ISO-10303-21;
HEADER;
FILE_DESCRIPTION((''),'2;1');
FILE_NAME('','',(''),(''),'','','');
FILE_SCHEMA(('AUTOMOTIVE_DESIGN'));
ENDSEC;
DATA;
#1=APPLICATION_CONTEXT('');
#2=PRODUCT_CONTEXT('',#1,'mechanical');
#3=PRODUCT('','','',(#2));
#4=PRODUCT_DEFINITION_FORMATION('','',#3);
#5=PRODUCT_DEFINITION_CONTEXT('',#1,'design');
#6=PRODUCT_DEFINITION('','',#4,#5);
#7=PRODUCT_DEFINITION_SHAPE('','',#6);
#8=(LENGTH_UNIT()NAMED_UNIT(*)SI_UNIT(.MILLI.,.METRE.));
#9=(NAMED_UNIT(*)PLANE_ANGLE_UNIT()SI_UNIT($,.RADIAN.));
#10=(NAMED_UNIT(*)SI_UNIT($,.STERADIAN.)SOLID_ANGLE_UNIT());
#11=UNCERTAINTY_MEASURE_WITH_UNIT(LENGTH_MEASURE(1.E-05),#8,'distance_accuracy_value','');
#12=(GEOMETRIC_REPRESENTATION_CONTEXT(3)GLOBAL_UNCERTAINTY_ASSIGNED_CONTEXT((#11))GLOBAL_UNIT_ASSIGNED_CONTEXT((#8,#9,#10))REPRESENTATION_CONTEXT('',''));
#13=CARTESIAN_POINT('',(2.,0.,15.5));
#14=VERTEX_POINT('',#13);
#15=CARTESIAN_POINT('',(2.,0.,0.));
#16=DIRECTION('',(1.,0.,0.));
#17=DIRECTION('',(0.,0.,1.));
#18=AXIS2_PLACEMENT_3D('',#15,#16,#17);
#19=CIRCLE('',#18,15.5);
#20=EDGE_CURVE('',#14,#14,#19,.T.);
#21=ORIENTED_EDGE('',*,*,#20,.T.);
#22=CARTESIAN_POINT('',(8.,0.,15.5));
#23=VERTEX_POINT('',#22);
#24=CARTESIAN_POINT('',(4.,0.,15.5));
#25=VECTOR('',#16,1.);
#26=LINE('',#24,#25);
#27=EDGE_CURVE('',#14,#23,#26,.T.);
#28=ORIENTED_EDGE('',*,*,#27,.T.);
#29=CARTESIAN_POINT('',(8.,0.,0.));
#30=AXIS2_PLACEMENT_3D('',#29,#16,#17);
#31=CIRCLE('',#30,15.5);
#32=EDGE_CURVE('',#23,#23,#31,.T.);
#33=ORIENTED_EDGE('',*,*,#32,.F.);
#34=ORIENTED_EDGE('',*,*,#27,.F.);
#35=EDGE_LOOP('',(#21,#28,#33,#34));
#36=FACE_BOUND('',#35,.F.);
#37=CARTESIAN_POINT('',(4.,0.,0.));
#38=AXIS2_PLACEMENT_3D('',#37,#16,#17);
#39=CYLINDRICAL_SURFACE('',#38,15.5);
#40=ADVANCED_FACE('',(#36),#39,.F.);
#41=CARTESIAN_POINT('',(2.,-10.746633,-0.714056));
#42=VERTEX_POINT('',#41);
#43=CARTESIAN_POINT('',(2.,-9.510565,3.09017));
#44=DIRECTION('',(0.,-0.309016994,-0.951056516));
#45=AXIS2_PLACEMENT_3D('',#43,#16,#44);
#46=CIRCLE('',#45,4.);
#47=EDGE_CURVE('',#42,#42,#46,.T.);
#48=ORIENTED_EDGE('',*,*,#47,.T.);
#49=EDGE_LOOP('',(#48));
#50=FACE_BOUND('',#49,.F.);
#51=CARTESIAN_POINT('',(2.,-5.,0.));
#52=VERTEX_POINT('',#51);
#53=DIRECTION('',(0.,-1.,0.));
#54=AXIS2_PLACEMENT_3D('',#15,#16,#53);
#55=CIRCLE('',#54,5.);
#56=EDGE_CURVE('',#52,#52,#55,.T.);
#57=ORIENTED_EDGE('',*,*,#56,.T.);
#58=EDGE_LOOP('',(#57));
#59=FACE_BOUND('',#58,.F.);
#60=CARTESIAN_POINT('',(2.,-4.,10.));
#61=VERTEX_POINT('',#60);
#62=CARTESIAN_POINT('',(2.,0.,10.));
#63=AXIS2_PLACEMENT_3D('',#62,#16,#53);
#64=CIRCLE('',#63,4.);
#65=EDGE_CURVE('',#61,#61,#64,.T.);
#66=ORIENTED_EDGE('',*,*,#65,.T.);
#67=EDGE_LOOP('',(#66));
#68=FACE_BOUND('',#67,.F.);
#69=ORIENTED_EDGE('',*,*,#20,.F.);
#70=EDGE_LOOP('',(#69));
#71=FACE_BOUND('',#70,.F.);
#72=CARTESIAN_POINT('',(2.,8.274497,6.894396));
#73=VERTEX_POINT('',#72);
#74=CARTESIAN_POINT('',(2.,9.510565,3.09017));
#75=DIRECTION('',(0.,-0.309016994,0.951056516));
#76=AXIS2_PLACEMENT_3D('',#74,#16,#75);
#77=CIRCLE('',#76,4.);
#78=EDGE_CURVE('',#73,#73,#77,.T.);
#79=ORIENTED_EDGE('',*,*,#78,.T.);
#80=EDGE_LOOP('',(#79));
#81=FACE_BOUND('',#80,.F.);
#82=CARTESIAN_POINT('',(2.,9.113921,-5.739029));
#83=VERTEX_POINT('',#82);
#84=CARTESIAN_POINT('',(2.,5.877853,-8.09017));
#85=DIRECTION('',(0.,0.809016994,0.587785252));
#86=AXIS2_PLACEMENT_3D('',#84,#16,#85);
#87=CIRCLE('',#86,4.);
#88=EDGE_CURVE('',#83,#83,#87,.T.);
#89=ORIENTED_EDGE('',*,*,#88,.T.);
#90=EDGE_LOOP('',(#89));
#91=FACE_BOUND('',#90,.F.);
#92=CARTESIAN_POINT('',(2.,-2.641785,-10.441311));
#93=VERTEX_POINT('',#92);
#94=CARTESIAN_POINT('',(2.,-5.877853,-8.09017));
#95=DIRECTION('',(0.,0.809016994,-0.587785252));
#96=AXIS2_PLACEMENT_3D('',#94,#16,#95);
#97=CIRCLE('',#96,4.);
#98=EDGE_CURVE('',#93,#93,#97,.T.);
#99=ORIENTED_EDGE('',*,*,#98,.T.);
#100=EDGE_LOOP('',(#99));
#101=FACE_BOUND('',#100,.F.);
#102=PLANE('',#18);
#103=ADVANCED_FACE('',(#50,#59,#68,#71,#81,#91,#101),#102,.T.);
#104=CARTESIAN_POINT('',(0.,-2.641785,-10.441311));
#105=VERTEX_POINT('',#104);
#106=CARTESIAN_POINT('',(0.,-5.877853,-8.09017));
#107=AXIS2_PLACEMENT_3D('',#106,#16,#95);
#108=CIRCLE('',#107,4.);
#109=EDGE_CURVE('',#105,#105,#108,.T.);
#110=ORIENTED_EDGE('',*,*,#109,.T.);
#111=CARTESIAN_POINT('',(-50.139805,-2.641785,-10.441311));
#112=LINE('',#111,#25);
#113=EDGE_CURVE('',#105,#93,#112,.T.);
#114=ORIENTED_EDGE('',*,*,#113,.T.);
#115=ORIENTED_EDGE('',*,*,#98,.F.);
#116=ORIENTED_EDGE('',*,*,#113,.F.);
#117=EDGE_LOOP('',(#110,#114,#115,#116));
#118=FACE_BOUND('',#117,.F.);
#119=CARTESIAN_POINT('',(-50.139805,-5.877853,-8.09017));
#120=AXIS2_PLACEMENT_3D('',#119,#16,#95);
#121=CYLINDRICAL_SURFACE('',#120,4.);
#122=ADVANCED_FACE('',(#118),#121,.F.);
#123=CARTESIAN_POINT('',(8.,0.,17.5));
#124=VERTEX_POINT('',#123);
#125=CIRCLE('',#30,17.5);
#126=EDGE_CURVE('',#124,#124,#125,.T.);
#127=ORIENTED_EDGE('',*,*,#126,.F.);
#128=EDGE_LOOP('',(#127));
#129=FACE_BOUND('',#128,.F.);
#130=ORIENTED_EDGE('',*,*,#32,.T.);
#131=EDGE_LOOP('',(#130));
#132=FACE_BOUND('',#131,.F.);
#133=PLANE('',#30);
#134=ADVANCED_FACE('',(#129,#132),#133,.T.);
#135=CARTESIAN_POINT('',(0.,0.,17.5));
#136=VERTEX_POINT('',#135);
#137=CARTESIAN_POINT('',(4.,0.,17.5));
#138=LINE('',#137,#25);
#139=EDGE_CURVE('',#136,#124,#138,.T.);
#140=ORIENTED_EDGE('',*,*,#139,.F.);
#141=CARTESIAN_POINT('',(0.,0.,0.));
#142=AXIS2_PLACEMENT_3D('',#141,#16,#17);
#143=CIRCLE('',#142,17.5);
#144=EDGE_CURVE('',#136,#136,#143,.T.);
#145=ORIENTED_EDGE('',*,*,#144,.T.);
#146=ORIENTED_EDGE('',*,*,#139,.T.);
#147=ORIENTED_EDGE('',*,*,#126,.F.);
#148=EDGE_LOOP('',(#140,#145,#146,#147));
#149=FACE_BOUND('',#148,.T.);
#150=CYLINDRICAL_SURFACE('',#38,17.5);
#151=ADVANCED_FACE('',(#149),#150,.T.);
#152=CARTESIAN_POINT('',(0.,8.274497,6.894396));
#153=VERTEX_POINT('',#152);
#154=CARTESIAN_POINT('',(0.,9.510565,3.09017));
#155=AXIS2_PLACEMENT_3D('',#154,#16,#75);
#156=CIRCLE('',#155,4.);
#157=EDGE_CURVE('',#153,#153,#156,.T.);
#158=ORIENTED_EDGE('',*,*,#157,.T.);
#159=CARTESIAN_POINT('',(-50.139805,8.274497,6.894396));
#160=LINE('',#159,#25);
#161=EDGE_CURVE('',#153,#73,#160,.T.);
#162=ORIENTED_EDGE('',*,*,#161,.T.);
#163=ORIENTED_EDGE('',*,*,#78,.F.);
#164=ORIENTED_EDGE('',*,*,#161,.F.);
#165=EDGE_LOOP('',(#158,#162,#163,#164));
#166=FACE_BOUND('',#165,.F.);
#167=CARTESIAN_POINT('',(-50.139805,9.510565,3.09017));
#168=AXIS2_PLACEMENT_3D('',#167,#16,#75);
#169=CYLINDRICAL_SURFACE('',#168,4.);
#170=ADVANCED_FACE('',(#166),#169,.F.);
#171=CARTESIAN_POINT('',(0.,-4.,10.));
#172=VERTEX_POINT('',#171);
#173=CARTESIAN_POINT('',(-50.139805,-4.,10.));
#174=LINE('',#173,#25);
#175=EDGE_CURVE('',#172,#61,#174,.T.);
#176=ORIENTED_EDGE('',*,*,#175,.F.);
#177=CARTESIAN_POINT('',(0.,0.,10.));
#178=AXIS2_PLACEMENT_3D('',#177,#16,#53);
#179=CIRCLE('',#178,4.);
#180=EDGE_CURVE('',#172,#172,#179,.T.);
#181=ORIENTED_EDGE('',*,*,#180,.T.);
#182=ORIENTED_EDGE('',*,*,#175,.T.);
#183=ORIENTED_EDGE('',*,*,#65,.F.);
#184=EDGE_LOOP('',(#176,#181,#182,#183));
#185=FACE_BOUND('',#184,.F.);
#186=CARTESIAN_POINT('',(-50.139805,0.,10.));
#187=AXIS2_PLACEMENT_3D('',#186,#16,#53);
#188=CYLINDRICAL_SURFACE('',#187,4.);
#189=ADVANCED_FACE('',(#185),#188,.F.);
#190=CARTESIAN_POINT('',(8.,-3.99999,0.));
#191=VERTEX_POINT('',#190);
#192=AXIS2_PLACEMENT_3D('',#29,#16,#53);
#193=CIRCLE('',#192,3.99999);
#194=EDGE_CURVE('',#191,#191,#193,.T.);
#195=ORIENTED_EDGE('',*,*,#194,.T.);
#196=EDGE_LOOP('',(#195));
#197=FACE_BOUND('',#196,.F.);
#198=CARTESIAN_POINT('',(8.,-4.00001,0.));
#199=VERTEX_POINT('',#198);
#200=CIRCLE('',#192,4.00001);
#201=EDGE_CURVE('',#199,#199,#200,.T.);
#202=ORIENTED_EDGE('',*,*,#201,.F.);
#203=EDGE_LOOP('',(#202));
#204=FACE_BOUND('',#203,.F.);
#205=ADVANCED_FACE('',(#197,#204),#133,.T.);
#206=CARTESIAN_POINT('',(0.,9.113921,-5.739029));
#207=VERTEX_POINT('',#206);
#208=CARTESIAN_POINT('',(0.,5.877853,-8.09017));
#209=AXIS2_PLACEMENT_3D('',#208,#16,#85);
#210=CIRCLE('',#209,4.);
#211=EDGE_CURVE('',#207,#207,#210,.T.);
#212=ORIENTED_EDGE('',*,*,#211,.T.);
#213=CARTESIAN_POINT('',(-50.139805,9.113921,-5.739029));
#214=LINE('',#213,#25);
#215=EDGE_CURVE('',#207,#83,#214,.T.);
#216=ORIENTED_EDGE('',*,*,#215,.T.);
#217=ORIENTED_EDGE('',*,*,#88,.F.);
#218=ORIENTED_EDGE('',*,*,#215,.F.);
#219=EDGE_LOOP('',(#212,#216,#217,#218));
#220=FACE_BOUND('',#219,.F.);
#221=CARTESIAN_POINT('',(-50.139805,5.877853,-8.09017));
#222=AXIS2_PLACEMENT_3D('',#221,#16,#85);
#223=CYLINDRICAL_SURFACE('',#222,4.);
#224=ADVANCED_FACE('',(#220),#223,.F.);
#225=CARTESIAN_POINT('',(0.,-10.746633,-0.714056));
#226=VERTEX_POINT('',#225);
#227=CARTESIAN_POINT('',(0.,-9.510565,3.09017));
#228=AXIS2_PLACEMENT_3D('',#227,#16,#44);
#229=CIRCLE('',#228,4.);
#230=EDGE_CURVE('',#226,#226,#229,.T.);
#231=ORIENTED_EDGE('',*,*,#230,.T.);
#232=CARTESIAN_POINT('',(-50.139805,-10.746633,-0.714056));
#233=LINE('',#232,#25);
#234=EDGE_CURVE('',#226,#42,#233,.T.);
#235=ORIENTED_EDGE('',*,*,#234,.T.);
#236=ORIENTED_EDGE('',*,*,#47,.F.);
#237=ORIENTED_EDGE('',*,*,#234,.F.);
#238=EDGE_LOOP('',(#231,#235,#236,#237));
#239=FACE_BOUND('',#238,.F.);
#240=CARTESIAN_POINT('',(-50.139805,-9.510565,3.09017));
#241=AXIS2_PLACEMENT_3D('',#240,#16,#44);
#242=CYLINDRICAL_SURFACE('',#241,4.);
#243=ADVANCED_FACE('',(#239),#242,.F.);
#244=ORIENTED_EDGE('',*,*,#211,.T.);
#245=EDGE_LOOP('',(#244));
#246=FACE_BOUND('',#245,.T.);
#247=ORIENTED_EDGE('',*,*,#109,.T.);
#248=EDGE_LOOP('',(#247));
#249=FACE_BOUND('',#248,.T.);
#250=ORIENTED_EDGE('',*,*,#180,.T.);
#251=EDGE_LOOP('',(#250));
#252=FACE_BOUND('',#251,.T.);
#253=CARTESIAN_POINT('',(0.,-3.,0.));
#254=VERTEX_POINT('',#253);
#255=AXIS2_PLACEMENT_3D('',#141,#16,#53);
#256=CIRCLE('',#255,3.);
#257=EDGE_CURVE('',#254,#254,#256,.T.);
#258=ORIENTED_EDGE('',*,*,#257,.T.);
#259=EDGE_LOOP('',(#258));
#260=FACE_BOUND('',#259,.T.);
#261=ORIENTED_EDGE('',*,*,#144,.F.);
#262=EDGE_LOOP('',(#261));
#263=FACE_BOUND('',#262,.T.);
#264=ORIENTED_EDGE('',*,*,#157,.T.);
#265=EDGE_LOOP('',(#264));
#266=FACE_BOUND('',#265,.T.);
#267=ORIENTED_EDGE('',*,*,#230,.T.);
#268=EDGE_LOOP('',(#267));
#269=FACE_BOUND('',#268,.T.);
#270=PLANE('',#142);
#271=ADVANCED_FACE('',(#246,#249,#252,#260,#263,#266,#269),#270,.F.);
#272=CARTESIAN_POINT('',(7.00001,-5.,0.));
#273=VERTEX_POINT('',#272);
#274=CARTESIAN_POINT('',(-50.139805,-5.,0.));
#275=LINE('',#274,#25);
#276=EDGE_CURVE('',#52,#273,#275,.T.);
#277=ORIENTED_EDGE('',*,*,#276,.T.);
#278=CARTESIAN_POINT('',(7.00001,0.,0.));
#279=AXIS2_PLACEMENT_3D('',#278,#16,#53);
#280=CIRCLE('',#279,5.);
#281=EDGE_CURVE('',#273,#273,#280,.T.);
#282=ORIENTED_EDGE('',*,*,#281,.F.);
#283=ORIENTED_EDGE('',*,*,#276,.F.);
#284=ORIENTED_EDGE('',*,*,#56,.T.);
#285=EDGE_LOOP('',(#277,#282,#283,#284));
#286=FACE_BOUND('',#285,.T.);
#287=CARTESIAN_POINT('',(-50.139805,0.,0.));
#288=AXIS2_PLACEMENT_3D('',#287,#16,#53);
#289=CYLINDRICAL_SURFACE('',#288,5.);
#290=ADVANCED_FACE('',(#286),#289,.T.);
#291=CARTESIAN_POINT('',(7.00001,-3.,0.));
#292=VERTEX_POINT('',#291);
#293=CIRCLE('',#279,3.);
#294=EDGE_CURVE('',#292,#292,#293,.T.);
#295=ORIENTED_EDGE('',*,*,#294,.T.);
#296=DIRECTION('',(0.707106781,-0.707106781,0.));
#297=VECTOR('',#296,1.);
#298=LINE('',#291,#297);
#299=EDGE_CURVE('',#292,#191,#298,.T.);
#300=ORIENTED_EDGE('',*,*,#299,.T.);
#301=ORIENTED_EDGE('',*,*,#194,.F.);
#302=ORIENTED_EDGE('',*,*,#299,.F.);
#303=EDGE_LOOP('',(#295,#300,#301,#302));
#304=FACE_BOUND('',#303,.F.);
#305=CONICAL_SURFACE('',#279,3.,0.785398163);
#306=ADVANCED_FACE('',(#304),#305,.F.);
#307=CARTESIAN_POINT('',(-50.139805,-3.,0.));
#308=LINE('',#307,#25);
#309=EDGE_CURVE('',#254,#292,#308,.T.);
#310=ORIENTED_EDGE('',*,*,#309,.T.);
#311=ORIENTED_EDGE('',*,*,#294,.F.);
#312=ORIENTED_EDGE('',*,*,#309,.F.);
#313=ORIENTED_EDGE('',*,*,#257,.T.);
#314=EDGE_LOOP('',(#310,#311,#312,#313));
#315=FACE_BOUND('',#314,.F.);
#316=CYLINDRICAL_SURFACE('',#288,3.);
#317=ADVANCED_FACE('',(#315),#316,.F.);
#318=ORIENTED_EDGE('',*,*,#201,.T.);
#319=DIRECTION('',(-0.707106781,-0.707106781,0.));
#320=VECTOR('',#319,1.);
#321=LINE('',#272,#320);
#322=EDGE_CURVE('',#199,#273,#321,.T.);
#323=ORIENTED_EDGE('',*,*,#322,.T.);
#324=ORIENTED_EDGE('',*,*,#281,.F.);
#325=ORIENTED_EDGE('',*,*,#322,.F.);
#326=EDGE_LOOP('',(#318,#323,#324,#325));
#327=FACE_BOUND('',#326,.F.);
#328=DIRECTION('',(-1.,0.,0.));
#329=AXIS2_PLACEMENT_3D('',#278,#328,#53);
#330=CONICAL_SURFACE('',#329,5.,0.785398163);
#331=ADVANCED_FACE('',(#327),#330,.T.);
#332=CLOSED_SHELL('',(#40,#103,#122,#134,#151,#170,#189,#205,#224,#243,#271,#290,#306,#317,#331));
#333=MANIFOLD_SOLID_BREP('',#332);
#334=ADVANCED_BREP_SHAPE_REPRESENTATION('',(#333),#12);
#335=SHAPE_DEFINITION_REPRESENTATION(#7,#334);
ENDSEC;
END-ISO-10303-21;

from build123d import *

# Parameters (mm, degrees)
F0_W            = 8
F0_H            = 17.5
F3_D            = 6
F4_T            = -2
F6_D            = 8
F6_COPIES_COUNT = 5
F7_SIZE         = 0.99999


# Not quite as in the source:
# - a fillet or chamfer is up to 0.001 mm smaller than in the source, because OpenCascade refuses the exact size
# - a pattern or mirror of a feature is missing from the dataset's text; its kind, count and spacing are read off the source's solid


with BuildPart() as f1:
    # F0 (on Front) → F1 (revolve)
    with BuildSketch(Plane.XZ):
        with Locations((4, 8.75)):
            Rectangle(F0_W, F0_H)
    revolve(axis=Axis((4, 0, 0), (1, 0, 0)))

    # F3 (through all)
    with Locations(Plane(origin=(0, 0, 0), x_dir=(0, 1, 0), z_dir=(-1, 0, 0))):
        with Locations((0, 0)):
            Hole(F3_D / 2)

    # F4
    f4_openings = [f1.faces().sort_by_distance(p)[0] for p in [
        (8, 0, -17.005025),
    ]]
    offset(amount=F4_T, openings=f4_openings)

    # F6 (through all)
    with Locations(Plane(origin=(0, 0, 0), x_dir=(0, 1, 0), z_dir=(-1, 0, 0))):
        with Locations((0, -10)):
            f6 = Hole(F6_D / 2)

    # F6_copies: F6 ×5 about axis
    f6_copies_axis = Axis((0, 0, 0), (1, 0, 0))
    for i in range(1, F6_COPIES_COUNT):
        add(f6.rotate(f6_copies_axis, i * 360 / F6_COPIES_COUNT), mode=Mode.SUBTRACT)

    # F7 (size 1 in the source; OpenCascade refuses exactly that, so slightly less here)
    f7_edges = [f1.edges().sort_by_distance(p)[0] for p in [
        (8, -3, 0),
        (8, -5, 0),
    ]]
    chamfer(f7_edges, length=F7_SIZE)


solid = f1.part
